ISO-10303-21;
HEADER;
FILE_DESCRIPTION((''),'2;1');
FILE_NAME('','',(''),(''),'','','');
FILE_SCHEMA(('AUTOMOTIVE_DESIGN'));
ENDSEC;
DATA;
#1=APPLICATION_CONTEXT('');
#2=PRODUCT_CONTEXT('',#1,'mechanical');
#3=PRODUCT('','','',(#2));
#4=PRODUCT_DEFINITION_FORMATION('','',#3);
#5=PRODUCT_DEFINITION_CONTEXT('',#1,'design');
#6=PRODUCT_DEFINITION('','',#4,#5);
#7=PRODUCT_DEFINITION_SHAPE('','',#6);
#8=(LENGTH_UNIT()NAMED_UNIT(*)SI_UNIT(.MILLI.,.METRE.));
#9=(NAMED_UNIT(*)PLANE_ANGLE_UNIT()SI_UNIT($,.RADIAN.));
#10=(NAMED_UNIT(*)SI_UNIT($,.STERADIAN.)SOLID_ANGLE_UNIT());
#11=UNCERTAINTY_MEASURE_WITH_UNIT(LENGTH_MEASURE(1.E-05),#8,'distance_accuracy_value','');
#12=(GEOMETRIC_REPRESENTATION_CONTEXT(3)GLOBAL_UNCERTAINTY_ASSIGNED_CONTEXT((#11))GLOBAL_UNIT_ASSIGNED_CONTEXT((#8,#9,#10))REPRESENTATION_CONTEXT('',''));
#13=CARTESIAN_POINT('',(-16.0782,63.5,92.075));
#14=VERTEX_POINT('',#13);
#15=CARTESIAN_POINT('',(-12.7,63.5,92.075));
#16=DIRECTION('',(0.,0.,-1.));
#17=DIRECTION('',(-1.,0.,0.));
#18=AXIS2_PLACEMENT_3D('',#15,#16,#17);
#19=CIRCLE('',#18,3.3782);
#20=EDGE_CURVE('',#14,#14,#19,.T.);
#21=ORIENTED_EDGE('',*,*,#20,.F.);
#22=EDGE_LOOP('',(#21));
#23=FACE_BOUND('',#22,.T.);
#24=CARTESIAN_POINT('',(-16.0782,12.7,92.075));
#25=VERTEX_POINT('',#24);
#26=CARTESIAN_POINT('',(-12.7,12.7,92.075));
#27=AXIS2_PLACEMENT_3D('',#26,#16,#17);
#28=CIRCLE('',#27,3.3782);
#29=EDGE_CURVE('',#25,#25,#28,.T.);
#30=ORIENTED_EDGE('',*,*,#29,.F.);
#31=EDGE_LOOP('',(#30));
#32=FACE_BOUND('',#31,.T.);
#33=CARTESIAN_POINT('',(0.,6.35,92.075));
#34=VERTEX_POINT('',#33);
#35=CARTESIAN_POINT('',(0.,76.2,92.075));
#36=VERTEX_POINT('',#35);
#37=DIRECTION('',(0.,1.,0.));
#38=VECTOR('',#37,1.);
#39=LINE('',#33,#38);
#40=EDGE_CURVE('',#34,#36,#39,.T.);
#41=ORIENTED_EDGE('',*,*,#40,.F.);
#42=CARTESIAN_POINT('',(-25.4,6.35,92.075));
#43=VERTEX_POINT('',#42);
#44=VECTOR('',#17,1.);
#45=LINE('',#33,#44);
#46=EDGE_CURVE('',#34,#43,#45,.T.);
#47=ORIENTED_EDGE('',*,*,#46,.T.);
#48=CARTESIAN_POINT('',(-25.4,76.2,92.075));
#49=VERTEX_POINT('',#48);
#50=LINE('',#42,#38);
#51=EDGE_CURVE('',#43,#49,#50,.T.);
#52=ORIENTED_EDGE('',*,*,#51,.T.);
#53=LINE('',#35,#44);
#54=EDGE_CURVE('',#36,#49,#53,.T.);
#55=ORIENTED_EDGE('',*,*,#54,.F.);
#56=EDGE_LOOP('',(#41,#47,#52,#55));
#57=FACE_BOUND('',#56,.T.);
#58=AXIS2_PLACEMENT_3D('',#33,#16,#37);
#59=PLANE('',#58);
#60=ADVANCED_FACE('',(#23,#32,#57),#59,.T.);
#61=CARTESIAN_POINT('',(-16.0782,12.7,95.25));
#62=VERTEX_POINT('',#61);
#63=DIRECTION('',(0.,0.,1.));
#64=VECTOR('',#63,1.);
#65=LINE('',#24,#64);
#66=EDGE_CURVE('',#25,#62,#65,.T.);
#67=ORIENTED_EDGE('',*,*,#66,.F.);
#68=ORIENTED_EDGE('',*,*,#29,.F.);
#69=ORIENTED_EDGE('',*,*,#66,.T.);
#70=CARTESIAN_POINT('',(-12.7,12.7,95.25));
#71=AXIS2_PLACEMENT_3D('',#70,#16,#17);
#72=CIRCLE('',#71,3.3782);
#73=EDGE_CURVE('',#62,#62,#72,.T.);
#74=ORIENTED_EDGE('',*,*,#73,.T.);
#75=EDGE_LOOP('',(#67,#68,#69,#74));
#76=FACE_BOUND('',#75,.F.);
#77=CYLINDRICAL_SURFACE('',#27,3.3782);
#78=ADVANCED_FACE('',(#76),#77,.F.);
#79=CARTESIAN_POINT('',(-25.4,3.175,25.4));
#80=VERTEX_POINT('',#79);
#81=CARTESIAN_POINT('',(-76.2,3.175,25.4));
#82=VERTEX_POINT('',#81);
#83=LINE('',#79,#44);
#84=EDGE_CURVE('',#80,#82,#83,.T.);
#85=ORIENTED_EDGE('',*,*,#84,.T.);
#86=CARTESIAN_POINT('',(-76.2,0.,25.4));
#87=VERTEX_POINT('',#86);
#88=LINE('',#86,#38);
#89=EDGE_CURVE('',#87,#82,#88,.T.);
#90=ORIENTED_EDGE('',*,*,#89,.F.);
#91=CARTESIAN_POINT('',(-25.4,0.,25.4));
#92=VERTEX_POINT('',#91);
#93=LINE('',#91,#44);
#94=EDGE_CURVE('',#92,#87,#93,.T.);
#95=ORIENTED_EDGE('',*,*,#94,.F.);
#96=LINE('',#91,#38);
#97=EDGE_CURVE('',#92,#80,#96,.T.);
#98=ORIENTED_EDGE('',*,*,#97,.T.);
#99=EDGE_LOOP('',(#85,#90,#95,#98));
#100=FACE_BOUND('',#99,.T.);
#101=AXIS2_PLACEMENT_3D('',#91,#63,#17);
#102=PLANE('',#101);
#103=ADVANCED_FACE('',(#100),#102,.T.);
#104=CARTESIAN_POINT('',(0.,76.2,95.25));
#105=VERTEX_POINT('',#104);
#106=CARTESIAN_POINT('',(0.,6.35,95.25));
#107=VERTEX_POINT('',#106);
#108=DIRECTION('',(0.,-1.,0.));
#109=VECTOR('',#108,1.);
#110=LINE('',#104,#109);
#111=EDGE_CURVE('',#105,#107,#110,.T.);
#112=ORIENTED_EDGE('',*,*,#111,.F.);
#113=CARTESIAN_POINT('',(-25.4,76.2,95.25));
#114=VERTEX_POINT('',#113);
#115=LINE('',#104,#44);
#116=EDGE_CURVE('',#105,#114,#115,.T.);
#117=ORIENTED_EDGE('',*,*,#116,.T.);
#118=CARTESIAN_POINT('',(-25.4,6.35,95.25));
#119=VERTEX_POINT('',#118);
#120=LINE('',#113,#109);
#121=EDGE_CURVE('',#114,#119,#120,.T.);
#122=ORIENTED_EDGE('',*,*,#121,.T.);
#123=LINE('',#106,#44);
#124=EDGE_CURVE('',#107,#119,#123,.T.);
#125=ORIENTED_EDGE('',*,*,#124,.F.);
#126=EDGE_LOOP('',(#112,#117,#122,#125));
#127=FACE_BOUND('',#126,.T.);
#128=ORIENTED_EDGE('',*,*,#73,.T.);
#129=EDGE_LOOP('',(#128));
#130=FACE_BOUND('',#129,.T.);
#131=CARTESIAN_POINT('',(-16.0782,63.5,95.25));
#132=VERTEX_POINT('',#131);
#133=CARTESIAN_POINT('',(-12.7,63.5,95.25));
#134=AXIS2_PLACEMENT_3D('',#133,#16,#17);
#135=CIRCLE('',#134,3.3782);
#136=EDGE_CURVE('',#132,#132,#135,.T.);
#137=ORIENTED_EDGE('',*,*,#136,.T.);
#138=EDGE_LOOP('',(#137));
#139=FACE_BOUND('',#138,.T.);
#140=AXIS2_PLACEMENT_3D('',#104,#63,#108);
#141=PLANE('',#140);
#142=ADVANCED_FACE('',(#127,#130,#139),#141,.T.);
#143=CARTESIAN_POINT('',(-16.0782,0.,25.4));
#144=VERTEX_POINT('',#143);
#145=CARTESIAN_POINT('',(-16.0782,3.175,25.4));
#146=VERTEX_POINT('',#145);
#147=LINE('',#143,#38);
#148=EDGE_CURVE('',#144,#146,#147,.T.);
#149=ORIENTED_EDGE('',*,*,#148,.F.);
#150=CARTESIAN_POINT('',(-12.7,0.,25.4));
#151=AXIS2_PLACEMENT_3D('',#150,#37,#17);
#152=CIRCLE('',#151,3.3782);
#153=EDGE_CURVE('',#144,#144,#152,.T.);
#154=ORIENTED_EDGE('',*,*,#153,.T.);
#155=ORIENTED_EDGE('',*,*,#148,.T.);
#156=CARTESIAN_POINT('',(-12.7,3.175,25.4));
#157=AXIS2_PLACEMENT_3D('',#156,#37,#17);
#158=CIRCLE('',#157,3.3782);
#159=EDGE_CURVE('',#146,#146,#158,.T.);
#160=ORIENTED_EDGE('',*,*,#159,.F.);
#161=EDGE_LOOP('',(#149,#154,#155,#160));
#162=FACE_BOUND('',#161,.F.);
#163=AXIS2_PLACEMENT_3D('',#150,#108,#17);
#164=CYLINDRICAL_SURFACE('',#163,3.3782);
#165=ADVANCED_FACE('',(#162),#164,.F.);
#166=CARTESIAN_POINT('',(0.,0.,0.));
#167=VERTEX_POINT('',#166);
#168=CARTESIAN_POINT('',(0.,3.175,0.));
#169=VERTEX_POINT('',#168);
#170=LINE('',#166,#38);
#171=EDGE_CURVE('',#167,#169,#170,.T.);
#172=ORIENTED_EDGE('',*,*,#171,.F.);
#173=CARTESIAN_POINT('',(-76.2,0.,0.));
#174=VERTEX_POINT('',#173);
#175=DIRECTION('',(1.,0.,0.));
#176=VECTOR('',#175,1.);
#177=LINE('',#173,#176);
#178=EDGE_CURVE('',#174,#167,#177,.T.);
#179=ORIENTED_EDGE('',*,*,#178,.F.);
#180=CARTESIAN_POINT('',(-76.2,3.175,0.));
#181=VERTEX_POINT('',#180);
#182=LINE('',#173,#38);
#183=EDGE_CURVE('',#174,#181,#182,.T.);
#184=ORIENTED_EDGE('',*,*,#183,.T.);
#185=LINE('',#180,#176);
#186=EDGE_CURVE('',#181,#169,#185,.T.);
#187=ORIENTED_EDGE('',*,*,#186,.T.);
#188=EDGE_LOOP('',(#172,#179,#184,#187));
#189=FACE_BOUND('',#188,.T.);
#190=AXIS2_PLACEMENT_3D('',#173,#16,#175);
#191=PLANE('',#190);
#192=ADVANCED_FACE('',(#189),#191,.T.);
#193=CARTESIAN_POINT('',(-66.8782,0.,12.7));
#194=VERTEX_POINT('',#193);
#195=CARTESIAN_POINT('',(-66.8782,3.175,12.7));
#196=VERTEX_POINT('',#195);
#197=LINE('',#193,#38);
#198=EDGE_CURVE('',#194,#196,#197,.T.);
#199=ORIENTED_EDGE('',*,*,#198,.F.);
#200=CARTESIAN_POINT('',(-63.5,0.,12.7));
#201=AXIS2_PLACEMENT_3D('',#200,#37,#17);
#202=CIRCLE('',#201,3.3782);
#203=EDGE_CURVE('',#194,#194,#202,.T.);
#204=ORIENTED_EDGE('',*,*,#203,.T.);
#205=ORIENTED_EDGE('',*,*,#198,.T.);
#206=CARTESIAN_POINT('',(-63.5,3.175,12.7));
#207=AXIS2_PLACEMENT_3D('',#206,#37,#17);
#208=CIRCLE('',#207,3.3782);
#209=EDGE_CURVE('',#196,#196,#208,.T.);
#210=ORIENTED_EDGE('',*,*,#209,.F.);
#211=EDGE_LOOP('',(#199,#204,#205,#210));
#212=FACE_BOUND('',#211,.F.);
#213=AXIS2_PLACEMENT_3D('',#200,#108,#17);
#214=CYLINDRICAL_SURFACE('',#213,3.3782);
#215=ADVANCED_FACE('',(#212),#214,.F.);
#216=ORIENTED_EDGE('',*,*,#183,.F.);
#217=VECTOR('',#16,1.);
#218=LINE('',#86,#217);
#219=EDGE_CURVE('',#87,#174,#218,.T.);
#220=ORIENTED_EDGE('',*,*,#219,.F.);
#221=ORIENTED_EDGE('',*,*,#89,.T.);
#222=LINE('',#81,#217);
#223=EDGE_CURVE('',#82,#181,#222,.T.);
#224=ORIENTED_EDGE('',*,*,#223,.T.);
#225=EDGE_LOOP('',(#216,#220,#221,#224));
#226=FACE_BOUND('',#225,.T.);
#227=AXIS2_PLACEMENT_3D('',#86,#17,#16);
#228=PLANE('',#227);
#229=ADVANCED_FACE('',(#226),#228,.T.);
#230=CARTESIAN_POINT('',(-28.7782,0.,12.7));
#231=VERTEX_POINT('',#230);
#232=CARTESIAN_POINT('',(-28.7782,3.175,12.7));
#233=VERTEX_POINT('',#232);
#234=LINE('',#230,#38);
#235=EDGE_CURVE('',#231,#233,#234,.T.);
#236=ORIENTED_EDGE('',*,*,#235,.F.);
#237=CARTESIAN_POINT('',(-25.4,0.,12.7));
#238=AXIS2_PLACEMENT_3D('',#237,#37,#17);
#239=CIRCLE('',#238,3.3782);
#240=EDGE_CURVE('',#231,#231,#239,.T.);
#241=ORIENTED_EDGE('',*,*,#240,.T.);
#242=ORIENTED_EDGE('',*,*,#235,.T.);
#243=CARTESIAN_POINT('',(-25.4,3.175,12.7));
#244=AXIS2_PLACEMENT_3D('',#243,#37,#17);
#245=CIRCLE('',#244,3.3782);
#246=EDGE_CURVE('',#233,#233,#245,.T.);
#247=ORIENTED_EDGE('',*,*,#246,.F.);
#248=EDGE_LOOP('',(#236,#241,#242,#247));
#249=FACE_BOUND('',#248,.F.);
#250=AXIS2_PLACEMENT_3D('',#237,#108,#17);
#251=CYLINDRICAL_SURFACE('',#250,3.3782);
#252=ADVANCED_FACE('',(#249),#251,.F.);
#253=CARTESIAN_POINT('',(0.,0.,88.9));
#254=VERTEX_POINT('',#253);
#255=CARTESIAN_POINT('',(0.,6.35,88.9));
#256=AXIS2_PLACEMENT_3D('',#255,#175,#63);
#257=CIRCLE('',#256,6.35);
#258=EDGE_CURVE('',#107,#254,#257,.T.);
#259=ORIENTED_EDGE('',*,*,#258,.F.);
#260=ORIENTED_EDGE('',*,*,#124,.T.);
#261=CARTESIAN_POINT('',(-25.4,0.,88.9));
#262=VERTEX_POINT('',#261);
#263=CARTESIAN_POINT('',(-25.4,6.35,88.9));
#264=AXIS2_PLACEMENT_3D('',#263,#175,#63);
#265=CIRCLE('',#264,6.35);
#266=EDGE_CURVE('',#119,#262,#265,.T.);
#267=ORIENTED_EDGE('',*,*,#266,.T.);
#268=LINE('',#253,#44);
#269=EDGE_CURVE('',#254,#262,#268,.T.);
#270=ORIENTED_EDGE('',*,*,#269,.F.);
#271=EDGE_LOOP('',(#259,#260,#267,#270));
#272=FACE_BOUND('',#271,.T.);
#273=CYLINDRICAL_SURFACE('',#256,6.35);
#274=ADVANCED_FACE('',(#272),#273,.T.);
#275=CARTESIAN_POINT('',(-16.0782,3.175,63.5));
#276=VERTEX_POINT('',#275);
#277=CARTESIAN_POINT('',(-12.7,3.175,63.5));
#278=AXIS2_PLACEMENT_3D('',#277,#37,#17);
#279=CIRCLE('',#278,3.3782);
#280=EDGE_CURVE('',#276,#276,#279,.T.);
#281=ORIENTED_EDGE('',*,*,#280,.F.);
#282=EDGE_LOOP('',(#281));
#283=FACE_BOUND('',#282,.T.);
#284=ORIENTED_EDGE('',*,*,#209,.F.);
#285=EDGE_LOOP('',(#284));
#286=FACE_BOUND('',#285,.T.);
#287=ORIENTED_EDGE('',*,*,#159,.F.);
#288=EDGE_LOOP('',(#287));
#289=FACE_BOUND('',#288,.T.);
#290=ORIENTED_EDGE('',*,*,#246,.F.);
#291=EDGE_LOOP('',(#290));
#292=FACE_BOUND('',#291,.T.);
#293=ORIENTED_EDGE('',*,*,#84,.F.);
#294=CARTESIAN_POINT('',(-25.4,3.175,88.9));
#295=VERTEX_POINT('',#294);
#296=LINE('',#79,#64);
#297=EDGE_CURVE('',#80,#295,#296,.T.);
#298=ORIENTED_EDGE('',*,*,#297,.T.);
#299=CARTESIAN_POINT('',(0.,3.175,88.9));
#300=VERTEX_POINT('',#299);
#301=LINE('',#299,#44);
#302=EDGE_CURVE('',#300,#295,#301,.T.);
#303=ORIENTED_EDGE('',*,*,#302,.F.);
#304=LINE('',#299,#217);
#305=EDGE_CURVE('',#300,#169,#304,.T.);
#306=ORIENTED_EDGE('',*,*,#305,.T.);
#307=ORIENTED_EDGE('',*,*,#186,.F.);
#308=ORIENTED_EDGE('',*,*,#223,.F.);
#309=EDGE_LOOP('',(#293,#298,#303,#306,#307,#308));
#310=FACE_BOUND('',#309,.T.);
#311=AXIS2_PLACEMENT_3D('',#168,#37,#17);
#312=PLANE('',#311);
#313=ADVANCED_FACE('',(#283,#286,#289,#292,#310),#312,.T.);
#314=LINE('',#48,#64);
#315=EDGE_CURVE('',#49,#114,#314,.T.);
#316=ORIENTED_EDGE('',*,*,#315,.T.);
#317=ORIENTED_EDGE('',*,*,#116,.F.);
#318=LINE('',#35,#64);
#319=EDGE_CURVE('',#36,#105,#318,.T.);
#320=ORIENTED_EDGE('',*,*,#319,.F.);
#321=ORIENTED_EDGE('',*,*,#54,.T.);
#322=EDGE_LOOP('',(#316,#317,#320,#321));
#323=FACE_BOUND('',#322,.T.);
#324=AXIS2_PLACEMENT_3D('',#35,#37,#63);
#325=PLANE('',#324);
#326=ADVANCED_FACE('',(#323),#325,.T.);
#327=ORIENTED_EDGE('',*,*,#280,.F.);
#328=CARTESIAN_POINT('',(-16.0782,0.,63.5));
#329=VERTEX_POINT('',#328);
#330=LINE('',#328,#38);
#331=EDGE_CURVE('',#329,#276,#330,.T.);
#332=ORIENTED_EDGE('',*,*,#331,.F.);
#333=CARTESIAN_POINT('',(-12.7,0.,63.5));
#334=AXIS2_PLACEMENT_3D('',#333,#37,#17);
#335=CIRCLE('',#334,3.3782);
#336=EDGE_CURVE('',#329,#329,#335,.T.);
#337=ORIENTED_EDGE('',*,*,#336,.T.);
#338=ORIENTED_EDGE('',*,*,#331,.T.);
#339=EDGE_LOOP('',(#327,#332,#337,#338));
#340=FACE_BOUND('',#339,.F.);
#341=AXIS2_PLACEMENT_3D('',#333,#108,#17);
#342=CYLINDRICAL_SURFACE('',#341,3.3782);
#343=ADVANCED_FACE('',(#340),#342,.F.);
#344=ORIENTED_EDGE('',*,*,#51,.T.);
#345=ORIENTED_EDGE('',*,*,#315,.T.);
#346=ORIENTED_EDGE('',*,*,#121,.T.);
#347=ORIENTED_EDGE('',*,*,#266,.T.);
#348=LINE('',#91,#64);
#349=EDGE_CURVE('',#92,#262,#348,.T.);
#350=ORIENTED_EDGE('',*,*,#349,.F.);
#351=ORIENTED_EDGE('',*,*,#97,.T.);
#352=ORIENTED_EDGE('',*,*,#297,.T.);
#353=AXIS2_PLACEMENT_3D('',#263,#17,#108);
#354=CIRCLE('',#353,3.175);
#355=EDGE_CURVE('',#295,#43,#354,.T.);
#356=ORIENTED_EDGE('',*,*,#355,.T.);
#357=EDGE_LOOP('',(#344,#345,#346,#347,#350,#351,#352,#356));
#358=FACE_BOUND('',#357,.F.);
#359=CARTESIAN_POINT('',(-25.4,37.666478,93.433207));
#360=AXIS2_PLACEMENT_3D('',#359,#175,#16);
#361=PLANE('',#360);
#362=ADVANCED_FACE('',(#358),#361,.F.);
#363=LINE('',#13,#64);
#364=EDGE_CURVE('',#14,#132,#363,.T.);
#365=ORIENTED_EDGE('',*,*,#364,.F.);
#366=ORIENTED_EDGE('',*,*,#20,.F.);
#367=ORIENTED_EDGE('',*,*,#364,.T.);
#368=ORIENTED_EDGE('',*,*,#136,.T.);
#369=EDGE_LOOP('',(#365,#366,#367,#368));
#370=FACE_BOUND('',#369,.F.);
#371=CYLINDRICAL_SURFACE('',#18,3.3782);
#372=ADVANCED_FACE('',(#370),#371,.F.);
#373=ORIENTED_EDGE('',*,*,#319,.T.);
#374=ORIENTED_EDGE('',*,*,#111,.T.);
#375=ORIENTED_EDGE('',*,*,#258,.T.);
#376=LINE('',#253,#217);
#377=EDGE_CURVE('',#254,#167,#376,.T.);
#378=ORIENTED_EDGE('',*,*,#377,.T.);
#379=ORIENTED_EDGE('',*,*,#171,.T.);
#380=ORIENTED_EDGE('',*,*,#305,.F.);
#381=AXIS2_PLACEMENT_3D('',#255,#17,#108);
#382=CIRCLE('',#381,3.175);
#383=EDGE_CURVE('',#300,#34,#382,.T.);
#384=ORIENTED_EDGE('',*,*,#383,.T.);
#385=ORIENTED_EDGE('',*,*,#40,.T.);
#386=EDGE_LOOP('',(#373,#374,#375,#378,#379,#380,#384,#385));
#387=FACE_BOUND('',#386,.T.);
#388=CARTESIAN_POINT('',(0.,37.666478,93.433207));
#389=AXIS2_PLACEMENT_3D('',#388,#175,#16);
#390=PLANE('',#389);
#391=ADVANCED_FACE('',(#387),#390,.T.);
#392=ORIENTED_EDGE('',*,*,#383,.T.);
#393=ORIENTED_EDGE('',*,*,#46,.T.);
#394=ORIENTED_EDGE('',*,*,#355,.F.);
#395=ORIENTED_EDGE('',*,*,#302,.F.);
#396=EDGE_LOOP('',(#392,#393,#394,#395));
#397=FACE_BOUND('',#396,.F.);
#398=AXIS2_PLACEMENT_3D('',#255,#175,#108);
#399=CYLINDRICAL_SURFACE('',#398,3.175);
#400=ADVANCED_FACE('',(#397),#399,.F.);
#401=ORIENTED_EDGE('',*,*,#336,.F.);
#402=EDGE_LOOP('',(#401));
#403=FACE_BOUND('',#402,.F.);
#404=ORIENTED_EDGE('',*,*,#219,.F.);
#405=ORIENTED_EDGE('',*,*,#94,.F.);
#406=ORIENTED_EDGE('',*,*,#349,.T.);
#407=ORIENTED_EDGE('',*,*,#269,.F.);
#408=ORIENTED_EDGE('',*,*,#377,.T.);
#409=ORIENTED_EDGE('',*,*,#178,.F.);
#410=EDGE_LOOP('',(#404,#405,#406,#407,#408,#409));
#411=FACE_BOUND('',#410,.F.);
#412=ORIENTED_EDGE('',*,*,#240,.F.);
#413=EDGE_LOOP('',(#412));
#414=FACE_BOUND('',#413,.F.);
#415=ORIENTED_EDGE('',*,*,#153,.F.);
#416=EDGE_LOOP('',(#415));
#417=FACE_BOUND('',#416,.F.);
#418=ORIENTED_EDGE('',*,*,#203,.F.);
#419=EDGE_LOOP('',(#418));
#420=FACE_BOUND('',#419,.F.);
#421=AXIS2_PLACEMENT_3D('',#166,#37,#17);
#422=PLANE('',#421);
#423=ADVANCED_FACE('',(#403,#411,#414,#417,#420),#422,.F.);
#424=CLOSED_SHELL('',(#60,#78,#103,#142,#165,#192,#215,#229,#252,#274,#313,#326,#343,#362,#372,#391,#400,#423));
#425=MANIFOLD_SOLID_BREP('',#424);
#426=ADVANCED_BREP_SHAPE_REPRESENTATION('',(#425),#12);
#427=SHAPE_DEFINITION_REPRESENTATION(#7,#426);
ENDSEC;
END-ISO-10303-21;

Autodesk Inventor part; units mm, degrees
ref_plane "YZ Plane" through (0, 0, 0) normal (1, 0, 0) x (0, 1, 0)
ref_plane "XZ Plane" through (0, 0, 0) normal (0, 1, 0) x (-1, 0, 0)
ref_plane "XY Plane" through (0, 0, 0) normal (0, 0, 1) x (1, 0, 0)
sketch "Sketch1" plane through (0, 0, 0) normal (0, 1, 0) x (-1, 0, 0)
  line L0 (0, 0) -> (0, 76.2)
  line L1 (25.4, 76.2) -> (25.4, 25.4)
  line L2 (25.4, 25.4) -> (76.2, 25.4)
  line L3 (76.2, 25.4) -> (76.2, 0)
  line L4 (76.2, 0) -> (0, 0)
  line L5 (25.4, 25.4) -> (0, 0) construction
  circle A0 centre (12.7, 63.5) radius 3.3782
  circle A1 centre (12.7, 25.4) radius 3.3782
  circle A2 centre (25.4, 12.7) radius 3.3782
  circle A3 centre (63.5, 12.7) radius 3.3782
  line L6 (25.4, 76.2) -> (25.4, 95.25)
  line L7 (25.4, 95.25) -> (0, 95.25)
  line L8 (0, 95.25) -> (0, 76.2)
  point P0 (0, 0)
  dimension "d0" = 76.2
  dimension "d1" = 25.4
  dimension "d2" = 50.8
  dimension "d3" = 50.8
  dimension "d4" = 25.4
  dimension "d5" = 6.7564
  dimension "d6" = 6.7564
  dimension "d7" = 6.7564
  dimension "d8" = 6.7564
  dimension "d9" = 12.7
  dimension "d10" = 0
  dimension "d11" = 12.7
  dimension "d12" = 12.7
  dimension "d13" = 12.7
  dimension "d15" = 12.7
  dimension "d17" = 19.05
extrude "Plate1" add sketch "Sketch1" along normal blind 3.175
sketch "Sketch2" plane through (0, 0, 92.075) normal (0, 0, 1) x (1, 0, 0)
  line L0 (-25.4, 0) -> (0, 0)
  line L1 (0, 0) -> (0, 76.2)
  line L2 (0, 76.2) -> (-25.4, 76.2)
  line L3 (-25.4, 76.2) -> (-25.4, 0)
edge flange "Flange1" height 76.2 angle 90 thickness 3.175 bend radius 3.175 thickness toward (0, 0, 1) relief tear relief width 3.175 relief depth 1.5875 edges at (-12.7, 3.175, 95.25) wall of the first edge with corners at (-25.4, 0, 92.075) (0, 0, 92.075) (0, 76.2, 92.075) (-25.4, 76.2, 92.075)
bend "Bend1"
corner "Corner1"
sketch "Sketch3" plane through (0, 76.2, 92.075) normal (0, 0, -1) x (-1, 0, 0)
  line L0 (25.4, 0) -> (0, 0) projected
  circle A0 centre (12.7, -12.7) radius 3.3782
  circle A1 centre (12.7, -63.5) radius 3.3782
  point P0 (0, -76.2)
  dimension "d29" = 6.7564
  dimension "d30" = 6.7564
  dimension "d31" = 12.7
  dimension "d32" = 50.8
extrude "Cut1" cut sketch "Sketch3" against normal blind 3.175
equation "\"d33\" = Thickness"
equation "\"d19\" = BendReliefWidth"
equation "\"d20\" = BendReliefDepth"
equation "\"d21\" = MinimumRemnant"
equation "\"d22\" = BendRadius"
equation "\"d25\" = BendRadius"
equation "\"d26\" = CornerReliefSize"
equation "\"d27\" = GapSize"
equation "\"d28\" = JacobiRadiusSize"
equation "\"BendRadius\" = Thickness"
equation "\"BendReliefWidth\" = Thickness"
equation "\"BendReliefDepth\" = 0.5 * Thickness"
equation "\"CornerReliefSize\" = 4 * Thickness"
equation "\"MinimumRemnant\" = 2 * Thickness"
equation "\"TransitionRadius\" = BendRadius"
equation "\"JacobiRadiusSize\" = BendRadius"
equation "\"GapSize\" = Thickness"
equation "\"d18\" = BendRadius"
equation "\"Thickness\" = 3.175"
properties part number "Gusset 2"
